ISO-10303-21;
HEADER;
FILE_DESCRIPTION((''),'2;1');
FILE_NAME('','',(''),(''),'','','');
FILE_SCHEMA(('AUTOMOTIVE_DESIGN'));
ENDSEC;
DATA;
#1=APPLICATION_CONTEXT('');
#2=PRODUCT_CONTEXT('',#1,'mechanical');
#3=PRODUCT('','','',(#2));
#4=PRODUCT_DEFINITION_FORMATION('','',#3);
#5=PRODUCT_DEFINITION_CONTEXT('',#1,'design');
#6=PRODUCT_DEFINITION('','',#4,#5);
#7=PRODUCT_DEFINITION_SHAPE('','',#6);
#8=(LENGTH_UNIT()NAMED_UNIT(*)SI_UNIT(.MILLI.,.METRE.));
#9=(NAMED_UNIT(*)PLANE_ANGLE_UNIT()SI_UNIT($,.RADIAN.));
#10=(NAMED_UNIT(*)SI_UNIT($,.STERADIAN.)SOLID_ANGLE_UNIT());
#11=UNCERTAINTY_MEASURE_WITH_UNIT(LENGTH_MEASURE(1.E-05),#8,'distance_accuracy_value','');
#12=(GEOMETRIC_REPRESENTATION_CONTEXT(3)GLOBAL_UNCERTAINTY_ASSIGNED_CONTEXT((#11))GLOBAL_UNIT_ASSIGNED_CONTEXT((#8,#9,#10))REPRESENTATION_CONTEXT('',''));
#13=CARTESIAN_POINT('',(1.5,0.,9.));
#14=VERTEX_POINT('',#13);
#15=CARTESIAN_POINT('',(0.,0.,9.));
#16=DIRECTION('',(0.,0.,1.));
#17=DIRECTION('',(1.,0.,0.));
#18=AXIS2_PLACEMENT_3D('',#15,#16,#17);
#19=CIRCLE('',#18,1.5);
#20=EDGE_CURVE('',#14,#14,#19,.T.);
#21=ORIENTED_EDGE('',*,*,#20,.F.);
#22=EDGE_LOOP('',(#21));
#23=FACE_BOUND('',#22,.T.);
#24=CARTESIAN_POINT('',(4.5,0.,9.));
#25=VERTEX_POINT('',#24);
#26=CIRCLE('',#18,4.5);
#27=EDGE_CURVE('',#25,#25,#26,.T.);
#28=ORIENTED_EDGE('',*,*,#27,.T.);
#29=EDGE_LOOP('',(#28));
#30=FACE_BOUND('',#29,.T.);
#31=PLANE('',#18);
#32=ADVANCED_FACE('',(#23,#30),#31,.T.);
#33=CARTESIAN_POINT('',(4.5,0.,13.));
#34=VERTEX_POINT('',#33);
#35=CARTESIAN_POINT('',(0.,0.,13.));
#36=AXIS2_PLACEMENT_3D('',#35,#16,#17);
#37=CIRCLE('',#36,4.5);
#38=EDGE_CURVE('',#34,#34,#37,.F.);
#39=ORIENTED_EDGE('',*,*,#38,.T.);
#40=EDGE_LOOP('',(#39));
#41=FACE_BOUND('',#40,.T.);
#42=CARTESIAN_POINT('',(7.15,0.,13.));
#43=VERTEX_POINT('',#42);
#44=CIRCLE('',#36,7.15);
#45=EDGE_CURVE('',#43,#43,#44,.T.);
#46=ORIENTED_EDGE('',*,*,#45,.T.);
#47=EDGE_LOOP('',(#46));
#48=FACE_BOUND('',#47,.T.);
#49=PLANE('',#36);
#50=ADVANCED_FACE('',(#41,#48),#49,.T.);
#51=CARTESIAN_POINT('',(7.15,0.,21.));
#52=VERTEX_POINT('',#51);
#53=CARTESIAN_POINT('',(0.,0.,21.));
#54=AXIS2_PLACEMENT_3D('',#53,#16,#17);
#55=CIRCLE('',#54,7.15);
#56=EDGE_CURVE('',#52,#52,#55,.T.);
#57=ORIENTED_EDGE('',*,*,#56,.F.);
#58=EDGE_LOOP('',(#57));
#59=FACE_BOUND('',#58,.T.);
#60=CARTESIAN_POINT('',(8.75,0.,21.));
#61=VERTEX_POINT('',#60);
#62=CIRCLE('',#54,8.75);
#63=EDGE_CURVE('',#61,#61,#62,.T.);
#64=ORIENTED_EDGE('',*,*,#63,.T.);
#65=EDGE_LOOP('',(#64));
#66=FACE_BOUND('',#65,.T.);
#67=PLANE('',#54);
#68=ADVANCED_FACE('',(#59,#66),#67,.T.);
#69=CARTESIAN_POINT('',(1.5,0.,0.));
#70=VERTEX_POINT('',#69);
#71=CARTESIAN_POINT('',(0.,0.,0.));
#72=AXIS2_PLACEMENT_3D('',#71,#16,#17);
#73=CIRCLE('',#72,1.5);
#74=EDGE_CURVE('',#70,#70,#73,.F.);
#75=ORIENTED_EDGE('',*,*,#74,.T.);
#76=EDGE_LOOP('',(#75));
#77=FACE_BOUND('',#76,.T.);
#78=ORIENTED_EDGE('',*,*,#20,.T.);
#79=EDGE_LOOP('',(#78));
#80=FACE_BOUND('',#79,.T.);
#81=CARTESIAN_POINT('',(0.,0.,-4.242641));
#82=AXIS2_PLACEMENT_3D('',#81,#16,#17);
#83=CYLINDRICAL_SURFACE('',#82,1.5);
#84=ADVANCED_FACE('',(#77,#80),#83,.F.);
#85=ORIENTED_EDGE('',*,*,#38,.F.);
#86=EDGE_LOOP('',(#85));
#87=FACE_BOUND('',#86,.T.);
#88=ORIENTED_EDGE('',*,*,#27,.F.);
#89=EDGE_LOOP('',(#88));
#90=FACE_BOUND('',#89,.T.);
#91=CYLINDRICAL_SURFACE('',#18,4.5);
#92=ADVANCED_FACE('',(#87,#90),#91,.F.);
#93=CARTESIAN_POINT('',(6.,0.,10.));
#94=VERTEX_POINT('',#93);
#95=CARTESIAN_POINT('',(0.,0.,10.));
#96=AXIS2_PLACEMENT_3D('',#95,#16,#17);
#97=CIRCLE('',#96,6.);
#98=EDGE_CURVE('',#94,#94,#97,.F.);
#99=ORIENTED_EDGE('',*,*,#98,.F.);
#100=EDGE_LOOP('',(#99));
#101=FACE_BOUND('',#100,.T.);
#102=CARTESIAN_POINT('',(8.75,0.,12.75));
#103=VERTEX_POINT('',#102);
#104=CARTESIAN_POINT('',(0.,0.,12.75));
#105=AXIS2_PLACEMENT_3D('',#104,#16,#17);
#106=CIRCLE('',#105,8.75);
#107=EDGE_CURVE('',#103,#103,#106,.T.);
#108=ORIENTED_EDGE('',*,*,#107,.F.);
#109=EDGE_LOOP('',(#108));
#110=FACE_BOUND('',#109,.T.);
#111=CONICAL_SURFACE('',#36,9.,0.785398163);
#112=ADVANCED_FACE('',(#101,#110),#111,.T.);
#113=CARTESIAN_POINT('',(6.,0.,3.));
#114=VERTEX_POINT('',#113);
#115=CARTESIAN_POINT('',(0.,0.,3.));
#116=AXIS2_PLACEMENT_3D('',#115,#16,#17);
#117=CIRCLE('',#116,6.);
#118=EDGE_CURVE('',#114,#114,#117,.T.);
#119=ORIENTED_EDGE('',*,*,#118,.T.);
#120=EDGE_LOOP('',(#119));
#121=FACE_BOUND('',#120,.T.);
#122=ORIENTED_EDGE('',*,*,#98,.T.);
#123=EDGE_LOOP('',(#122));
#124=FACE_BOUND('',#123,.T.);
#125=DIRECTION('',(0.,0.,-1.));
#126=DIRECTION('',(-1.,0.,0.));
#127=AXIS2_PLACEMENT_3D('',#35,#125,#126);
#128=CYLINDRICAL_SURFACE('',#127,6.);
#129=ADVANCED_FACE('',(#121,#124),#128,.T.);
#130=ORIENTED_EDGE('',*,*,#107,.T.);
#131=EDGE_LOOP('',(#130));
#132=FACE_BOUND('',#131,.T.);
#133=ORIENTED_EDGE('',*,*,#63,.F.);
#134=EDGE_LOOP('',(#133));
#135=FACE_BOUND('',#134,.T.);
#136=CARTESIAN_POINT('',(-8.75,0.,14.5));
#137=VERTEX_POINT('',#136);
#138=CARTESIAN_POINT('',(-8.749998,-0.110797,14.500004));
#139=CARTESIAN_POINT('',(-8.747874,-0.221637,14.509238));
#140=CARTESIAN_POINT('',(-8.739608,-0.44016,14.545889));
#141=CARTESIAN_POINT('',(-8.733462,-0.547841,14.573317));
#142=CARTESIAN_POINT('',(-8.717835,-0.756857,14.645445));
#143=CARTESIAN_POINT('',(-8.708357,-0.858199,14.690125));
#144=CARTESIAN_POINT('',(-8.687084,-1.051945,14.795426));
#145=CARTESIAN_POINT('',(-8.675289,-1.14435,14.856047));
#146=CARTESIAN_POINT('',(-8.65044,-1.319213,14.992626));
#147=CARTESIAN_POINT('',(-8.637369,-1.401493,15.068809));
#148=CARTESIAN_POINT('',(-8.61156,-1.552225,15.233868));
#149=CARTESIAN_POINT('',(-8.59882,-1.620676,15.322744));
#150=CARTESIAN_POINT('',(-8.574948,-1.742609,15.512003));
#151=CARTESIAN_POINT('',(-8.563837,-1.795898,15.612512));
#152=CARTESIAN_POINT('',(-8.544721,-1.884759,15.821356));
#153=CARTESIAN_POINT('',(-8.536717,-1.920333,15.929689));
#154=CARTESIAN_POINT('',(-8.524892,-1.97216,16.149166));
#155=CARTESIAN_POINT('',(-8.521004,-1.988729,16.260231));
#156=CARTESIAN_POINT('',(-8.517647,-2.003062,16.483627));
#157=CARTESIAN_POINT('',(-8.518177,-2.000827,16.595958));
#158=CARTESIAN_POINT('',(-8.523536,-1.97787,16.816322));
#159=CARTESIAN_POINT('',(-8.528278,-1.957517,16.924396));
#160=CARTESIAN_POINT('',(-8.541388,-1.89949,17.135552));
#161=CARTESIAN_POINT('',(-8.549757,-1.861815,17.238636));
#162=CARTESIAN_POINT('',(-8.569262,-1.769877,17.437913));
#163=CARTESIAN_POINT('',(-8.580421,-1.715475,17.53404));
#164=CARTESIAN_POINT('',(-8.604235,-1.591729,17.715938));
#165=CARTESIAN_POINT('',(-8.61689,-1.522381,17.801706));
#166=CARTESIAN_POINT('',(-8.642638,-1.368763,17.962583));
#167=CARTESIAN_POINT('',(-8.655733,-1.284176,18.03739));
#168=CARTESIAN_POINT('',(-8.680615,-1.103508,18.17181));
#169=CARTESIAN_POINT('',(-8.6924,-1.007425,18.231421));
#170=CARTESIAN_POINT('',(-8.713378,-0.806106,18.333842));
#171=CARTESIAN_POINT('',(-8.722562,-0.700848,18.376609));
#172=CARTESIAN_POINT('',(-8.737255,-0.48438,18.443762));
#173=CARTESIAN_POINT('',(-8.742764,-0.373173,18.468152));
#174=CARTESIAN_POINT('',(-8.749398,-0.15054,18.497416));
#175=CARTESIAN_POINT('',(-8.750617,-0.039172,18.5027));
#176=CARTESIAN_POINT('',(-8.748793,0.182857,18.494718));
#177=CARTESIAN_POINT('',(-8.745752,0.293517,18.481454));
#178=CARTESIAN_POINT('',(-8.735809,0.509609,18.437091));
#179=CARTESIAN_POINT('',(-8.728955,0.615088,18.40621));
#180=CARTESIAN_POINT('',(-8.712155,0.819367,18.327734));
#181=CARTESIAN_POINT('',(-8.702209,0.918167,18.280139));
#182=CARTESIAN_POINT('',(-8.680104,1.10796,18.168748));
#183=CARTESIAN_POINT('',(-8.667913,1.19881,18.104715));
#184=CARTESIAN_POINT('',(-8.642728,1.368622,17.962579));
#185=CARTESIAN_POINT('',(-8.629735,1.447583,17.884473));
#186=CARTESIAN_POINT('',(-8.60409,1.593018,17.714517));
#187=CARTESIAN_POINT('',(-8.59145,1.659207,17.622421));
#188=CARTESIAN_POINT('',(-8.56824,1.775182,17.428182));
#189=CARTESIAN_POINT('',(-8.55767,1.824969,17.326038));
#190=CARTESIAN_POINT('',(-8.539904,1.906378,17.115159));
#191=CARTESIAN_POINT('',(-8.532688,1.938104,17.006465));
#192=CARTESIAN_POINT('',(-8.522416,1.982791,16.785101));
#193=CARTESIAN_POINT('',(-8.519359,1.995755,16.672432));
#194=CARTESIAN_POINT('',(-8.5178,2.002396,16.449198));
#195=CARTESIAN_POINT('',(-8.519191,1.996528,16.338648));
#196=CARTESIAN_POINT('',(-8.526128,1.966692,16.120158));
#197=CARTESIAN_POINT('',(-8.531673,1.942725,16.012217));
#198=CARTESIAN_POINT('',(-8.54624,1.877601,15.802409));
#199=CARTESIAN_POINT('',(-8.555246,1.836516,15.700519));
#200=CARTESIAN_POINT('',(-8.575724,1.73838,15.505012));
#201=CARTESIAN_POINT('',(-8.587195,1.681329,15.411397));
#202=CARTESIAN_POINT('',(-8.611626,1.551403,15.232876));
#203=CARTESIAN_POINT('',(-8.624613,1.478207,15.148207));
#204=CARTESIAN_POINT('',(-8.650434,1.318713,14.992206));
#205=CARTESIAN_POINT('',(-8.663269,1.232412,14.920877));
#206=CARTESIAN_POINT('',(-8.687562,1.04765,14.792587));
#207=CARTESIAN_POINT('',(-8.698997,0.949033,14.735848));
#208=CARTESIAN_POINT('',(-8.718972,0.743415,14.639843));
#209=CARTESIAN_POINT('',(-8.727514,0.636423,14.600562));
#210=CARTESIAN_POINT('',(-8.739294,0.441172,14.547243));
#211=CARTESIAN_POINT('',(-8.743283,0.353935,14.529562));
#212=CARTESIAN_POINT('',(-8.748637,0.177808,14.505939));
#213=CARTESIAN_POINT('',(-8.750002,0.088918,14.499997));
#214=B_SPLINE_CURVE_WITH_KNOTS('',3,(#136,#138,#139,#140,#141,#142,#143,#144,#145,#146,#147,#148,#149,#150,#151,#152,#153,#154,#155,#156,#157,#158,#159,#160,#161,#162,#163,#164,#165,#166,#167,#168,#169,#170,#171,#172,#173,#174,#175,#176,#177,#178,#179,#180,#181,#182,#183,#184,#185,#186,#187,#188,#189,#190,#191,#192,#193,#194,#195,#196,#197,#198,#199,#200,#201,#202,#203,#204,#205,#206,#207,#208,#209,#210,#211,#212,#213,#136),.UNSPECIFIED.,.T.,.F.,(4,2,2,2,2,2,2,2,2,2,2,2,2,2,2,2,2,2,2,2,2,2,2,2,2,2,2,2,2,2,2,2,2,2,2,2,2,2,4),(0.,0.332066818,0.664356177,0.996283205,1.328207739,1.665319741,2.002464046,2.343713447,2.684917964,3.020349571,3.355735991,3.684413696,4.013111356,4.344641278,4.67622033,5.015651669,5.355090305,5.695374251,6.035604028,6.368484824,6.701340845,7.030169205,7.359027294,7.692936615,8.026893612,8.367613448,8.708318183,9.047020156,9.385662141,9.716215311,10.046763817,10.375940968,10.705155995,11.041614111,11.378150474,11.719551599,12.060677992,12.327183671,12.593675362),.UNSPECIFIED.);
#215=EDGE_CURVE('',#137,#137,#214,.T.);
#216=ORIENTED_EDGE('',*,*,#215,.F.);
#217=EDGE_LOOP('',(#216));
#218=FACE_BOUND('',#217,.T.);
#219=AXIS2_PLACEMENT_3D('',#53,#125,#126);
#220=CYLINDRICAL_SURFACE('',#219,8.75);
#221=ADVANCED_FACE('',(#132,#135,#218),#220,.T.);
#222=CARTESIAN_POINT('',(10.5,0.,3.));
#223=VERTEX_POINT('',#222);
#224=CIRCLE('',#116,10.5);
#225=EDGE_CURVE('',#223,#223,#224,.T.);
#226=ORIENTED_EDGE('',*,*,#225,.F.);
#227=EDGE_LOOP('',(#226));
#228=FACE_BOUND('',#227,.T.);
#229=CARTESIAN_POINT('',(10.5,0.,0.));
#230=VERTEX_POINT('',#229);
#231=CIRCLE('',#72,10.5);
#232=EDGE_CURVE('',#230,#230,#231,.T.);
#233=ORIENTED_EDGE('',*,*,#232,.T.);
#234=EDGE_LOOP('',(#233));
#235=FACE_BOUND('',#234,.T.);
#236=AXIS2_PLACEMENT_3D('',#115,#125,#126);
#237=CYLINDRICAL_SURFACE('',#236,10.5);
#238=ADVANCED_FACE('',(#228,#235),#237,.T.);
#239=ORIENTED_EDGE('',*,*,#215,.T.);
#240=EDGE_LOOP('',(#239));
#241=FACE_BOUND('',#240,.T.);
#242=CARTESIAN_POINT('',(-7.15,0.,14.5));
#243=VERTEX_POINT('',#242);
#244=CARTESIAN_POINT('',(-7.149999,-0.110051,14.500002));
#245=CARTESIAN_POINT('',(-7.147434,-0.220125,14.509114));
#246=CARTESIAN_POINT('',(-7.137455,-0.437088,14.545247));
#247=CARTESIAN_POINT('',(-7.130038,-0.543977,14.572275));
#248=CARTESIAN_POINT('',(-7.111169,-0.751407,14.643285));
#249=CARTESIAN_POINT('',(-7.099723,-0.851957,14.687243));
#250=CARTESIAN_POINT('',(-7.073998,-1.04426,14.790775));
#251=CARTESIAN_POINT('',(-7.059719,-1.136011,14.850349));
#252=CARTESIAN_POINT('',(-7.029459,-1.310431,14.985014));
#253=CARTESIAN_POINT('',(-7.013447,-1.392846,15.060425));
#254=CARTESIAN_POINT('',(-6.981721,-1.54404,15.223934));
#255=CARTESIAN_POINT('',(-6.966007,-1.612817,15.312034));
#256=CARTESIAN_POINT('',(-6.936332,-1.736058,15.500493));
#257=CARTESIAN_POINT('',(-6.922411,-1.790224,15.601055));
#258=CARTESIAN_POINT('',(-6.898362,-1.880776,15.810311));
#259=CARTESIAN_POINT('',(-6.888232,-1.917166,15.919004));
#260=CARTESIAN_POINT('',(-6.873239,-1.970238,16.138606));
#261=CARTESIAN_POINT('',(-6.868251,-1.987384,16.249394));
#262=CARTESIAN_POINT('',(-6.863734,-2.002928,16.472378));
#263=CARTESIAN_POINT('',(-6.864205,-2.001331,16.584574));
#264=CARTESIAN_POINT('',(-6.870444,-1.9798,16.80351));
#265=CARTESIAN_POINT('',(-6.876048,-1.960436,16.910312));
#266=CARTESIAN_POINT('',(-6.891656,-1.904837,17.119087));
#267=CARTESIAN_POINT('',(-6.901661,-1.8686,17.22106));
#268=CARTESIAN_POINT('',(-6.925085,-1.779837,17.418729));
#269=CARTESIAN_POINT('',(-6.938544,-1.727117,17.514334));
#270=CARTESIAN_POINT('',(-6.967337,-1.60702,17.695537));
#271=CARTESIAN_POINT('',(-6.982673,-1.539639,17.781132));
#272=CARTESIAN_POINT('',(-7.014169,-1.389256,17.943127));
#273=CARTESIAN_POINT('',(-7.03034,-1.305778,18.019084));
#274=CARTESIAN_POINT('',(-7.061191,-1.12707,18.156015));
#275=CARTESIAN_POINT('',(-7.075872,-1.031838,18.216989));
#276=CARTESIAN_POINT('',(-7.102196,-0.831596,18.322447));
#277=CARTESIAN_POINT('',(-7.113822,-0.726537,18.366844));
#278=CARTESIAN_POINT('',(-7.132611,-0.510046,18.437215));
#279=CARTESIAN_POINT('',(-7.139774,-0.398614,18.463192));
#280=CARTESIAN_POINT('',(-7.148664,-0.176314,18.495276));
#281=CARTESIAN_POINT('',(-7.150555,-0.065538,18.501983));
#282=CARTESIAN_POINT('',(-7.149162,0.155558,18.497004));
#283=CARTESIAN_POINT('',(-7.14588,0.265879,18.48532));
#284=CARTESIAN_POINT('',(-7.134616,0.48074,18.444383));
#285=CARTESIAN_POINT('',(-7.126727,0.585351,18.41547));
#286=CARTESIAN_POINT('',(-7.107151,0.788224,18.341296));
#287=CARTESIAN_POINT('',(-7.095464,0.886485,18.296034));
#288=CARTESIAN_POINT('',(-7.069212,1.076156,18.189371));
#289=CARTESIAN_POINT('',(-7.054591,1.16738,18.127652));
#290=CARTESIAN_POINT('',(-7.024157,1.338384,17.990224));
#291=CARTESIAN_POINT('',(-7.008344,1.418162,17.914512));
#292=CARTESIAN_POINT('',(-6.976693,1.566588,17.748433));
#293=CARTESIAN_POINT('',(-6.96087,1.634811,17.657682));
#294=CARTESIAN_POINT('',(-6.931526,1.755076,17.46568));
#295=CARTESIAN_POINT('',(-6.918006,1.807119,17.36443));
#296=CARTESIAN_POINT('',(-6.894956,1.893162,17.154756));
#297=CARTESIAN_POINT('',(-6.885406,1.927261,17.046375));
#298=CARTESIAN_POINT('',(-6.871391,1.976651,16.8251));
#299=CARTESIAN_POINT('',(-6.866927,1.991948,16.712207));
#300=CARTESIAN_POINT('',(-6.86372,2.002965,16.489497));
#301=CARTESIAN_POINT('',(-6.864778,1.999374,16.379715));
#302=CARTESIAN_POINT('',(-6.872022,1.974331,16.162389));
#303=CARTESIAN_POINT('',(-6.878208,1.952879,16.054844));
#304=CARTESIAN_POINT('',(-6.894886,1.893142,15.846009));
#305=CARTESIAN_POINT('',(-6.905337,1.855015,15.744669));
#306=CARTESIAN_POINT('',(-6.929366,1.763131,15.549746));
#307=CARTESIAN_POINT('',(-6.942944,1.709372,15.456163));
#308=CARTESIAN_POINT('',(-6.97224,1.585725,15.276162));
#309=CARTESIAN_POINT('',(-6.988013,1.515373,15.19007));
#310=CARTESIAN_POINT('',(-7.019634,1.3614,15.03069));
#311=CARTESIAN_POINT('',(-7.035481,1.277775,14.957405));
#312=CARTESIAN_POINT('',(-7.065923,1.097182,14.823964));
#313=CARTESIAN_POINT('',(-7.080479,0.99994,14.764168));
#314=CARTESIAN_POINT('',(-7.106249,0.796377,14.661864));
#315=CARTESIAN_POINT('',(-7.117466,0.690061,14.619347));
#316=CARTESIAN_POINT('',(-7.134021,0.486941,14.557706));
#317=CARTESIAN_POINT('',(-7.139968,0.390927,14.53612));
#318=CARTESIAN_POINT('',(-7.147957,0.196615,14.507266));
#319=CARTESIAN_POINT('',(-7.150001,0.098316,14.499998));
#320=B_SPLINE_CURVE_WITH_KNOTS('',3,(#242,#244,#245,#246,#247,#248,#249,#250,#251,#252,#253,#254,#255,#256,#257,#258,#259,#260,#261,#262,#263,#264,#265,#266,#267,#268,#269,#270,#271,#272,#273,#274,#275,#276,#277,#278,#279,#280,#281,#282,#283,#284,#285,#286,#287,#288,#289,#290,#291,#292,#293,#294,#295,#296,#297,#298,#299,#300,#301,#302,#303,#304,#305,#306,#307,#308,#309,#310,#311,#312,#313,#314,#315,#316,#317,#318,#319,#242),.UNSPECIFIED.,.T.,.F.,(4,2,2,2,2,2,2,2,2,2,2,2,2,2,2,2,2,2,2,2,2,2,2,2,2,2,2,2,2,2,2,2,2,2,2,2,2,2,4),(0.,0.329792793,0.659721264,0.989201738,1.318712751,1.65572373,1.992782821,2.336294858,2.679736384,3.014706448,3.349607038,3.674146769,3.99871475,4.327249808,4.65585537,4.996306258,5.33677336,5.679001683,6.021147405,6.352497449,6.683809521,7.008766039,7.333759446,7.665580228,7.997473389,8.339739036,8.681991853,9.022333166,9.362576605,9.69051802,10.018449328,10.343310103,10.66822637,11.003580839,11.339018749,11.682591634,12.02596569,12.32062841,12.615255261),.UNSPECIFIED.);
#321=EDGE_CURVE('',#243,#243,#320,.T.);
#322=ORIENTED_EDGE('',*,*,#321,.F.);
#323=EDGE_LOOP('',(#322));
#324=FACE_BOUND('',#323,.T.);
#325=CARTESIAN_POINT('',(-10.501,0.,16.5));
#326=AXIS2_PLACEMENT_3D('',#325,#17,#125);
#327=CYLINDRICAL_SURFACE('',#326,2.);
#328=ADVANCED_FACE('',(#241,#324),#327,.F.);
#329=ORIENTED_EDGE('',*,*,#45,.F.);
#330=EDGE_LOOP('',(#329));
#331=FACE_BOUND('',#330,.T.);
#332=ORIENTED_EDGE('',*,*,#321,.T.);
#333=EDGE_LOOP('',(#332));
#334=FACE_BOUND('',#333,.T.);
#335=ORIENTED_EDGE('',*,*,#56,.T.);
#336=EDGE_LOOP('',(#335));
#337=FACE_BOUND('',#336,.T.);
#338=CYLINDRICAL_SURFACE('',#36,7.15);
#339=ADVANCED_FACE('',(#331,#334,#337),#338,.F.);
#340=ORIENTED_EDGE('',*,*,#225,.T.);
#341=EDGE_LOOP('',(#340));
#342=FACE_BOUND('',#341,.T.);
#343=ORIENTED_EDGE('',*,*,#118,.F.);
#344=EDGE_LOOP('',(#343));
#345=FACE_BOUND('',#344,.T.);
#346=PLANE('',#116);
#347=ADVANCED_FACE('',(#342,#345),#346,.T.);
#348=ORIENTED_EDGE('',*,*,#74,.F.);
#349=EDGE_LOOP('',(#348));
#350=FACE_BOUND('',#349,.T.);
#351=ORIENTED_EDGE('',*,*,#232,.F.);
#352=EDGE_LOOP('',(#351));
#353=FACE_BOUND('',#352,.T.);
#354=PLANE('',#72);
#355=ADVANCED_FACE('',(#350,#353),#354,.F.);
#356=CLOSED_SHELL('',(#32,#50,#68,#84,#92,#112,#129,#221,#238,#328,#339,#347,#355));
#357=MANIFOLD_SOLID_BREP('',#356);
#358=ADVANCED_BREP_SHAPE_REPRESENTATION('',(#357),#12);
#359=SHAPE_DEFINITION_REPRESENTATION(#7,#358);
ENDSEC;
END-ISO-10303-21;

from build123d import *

# Parameters (mm, degrees)
SKETCH1_R               = 10.5
BOSS_EXTRUDE2_DEPTH     = 3
SKETCH2_R               = 6
BOSS_EXTRUDE3_DEPTH     = 10
SKETCH3_R               = 4.5
CUT_EXTRUDE1_DEPTH      = 4
SKETCH4_R               = 8.75
BOSS_EXTRUDE4_DEPTH     = 8
CHAMFER1_SIZE           = 3
SKETCH5_R               = 7.15
CUT_EXTRUDE3_DEPTH      = 8
SKETCH6_R               = 1.5
CUT_EXTRUDE4_DEPTH      = 9
CUT_EXTRUDE5_REACH      = 27.72
CUT_EXTRUDE5_END_RADIUS = 8.75
SKETCH7_R               = 2


with BuildPart() as part:
    # Sketch1 → Boss-Extrude2 (new body)
    with BuildSketch(Plane.XY):
        Circle(SKETCH1_R)
    extrude(amount=BOSS_EXTRUDE2_DEPTH)

    # Sketch2 → Boss-Extrude3 (add)
    with BuildSketch(Plane.XY.offset(3)):
        Circle(SKETCH2_R)
    extrude(amount=BOSS_EXTRUDE3_DEPTH)

    # Sketch3 → Cut-Extrude1 (cut)
    with BuildSketch(Plane.XY.offset(13)):
        Circle(SKETCH3_R)
    extrude(amount=-CUT_EXTRUDE1_DEPTH, mode=Mode.SUBTRACT)

    # Sketch4 → Boss-Extrude4 (add)
    with BuildSketch(Plane.XY.offset(13)):
        Circle(SKETCH4_R)
    extrude(amount=BOSS_EXTRUDE4_DEPTH)

    # Chamfer1
    # the kernel refuses this chamfer: 3 mm, written as the material it adds along each edge
    with BuildSketch(Plane(origin=(0, 0, 13), x_dir=(1, 0, 0), z_dir=(0, -1, 0))) as chamfer1_piece_1_section:
        Polygon((6 + CHAMFER1_SIZE, 0), (6, -CHAMFER1_SIZE), (6, 0), align=None)
    chamfer1_piece_1 = revolve(axis=Axis((0, 0, 13), (0, 0, 1)), mode=Mode.PRIVATE)
    chamfer1_piece_1 = chamfer1_piece_1 & Plane(origin=(0, 0, 11.374833607), x_dir=(1, 0, 0), z_dir=(0, 0, -1)) * Cylinder(8.75, 36, mode=Mode.PRIVATE)
    add(chamfer1_piece_1)

    # Sketch5 → Cut-Extrude3 (cut)
    with BuildSketch(Plane.XY.offset(21)):
        Circle(SKETCH5_R)
    extrude(amount=-CUT_EXTRUDE3_DEPTH, mode=Mode.SUBTRACT)

    # Sketch6 → Cut-Extrude4 (cut)
    with BuildSketch(Plane.XY.offset(9)):
        Circle(SKETCH6_R)
    extrude(amount=-CUT_EXTRUDE4_DEPTH, mode=Mode.SUBTRACT)

    # Cut-Extrude5: up to this cylinder (the profile starts inside it)
    cut_extrude5_end = Plane(origin=(0, 0, 16.5), z_dir=(0, 0, -1)) * Cylinder(CUT_EXTRUDE5_END_RADIUS, 73.94, mode=Mode.PRIVATE)
    # Sketch7 → Cut-Extrude5 (cut, up to the surface)
    with BuildSketch(Plane(origin=(0, 0, 0), x_dir=(0, 0, -1), z_dir=(1, 0, 0)), mode=Mode.PRIVATE) as cut_extrude5_sk1:
        with Locations((-16.5, 0)):
            Circle(SKETCH7_R)
    cut_extrude5_tool1 = extrude(cut_extrude5_sk1.sketch, amount=-CUT_EXTRUDE5_REACH, mode=Mode.PRIVATE) & cut_extrude5_end
    add(cut_extrude5_tool1.solids().sort_by_distance((0, 0, 16.5))[0], mode=Mode.SUBTRACT)


solid = part.part
